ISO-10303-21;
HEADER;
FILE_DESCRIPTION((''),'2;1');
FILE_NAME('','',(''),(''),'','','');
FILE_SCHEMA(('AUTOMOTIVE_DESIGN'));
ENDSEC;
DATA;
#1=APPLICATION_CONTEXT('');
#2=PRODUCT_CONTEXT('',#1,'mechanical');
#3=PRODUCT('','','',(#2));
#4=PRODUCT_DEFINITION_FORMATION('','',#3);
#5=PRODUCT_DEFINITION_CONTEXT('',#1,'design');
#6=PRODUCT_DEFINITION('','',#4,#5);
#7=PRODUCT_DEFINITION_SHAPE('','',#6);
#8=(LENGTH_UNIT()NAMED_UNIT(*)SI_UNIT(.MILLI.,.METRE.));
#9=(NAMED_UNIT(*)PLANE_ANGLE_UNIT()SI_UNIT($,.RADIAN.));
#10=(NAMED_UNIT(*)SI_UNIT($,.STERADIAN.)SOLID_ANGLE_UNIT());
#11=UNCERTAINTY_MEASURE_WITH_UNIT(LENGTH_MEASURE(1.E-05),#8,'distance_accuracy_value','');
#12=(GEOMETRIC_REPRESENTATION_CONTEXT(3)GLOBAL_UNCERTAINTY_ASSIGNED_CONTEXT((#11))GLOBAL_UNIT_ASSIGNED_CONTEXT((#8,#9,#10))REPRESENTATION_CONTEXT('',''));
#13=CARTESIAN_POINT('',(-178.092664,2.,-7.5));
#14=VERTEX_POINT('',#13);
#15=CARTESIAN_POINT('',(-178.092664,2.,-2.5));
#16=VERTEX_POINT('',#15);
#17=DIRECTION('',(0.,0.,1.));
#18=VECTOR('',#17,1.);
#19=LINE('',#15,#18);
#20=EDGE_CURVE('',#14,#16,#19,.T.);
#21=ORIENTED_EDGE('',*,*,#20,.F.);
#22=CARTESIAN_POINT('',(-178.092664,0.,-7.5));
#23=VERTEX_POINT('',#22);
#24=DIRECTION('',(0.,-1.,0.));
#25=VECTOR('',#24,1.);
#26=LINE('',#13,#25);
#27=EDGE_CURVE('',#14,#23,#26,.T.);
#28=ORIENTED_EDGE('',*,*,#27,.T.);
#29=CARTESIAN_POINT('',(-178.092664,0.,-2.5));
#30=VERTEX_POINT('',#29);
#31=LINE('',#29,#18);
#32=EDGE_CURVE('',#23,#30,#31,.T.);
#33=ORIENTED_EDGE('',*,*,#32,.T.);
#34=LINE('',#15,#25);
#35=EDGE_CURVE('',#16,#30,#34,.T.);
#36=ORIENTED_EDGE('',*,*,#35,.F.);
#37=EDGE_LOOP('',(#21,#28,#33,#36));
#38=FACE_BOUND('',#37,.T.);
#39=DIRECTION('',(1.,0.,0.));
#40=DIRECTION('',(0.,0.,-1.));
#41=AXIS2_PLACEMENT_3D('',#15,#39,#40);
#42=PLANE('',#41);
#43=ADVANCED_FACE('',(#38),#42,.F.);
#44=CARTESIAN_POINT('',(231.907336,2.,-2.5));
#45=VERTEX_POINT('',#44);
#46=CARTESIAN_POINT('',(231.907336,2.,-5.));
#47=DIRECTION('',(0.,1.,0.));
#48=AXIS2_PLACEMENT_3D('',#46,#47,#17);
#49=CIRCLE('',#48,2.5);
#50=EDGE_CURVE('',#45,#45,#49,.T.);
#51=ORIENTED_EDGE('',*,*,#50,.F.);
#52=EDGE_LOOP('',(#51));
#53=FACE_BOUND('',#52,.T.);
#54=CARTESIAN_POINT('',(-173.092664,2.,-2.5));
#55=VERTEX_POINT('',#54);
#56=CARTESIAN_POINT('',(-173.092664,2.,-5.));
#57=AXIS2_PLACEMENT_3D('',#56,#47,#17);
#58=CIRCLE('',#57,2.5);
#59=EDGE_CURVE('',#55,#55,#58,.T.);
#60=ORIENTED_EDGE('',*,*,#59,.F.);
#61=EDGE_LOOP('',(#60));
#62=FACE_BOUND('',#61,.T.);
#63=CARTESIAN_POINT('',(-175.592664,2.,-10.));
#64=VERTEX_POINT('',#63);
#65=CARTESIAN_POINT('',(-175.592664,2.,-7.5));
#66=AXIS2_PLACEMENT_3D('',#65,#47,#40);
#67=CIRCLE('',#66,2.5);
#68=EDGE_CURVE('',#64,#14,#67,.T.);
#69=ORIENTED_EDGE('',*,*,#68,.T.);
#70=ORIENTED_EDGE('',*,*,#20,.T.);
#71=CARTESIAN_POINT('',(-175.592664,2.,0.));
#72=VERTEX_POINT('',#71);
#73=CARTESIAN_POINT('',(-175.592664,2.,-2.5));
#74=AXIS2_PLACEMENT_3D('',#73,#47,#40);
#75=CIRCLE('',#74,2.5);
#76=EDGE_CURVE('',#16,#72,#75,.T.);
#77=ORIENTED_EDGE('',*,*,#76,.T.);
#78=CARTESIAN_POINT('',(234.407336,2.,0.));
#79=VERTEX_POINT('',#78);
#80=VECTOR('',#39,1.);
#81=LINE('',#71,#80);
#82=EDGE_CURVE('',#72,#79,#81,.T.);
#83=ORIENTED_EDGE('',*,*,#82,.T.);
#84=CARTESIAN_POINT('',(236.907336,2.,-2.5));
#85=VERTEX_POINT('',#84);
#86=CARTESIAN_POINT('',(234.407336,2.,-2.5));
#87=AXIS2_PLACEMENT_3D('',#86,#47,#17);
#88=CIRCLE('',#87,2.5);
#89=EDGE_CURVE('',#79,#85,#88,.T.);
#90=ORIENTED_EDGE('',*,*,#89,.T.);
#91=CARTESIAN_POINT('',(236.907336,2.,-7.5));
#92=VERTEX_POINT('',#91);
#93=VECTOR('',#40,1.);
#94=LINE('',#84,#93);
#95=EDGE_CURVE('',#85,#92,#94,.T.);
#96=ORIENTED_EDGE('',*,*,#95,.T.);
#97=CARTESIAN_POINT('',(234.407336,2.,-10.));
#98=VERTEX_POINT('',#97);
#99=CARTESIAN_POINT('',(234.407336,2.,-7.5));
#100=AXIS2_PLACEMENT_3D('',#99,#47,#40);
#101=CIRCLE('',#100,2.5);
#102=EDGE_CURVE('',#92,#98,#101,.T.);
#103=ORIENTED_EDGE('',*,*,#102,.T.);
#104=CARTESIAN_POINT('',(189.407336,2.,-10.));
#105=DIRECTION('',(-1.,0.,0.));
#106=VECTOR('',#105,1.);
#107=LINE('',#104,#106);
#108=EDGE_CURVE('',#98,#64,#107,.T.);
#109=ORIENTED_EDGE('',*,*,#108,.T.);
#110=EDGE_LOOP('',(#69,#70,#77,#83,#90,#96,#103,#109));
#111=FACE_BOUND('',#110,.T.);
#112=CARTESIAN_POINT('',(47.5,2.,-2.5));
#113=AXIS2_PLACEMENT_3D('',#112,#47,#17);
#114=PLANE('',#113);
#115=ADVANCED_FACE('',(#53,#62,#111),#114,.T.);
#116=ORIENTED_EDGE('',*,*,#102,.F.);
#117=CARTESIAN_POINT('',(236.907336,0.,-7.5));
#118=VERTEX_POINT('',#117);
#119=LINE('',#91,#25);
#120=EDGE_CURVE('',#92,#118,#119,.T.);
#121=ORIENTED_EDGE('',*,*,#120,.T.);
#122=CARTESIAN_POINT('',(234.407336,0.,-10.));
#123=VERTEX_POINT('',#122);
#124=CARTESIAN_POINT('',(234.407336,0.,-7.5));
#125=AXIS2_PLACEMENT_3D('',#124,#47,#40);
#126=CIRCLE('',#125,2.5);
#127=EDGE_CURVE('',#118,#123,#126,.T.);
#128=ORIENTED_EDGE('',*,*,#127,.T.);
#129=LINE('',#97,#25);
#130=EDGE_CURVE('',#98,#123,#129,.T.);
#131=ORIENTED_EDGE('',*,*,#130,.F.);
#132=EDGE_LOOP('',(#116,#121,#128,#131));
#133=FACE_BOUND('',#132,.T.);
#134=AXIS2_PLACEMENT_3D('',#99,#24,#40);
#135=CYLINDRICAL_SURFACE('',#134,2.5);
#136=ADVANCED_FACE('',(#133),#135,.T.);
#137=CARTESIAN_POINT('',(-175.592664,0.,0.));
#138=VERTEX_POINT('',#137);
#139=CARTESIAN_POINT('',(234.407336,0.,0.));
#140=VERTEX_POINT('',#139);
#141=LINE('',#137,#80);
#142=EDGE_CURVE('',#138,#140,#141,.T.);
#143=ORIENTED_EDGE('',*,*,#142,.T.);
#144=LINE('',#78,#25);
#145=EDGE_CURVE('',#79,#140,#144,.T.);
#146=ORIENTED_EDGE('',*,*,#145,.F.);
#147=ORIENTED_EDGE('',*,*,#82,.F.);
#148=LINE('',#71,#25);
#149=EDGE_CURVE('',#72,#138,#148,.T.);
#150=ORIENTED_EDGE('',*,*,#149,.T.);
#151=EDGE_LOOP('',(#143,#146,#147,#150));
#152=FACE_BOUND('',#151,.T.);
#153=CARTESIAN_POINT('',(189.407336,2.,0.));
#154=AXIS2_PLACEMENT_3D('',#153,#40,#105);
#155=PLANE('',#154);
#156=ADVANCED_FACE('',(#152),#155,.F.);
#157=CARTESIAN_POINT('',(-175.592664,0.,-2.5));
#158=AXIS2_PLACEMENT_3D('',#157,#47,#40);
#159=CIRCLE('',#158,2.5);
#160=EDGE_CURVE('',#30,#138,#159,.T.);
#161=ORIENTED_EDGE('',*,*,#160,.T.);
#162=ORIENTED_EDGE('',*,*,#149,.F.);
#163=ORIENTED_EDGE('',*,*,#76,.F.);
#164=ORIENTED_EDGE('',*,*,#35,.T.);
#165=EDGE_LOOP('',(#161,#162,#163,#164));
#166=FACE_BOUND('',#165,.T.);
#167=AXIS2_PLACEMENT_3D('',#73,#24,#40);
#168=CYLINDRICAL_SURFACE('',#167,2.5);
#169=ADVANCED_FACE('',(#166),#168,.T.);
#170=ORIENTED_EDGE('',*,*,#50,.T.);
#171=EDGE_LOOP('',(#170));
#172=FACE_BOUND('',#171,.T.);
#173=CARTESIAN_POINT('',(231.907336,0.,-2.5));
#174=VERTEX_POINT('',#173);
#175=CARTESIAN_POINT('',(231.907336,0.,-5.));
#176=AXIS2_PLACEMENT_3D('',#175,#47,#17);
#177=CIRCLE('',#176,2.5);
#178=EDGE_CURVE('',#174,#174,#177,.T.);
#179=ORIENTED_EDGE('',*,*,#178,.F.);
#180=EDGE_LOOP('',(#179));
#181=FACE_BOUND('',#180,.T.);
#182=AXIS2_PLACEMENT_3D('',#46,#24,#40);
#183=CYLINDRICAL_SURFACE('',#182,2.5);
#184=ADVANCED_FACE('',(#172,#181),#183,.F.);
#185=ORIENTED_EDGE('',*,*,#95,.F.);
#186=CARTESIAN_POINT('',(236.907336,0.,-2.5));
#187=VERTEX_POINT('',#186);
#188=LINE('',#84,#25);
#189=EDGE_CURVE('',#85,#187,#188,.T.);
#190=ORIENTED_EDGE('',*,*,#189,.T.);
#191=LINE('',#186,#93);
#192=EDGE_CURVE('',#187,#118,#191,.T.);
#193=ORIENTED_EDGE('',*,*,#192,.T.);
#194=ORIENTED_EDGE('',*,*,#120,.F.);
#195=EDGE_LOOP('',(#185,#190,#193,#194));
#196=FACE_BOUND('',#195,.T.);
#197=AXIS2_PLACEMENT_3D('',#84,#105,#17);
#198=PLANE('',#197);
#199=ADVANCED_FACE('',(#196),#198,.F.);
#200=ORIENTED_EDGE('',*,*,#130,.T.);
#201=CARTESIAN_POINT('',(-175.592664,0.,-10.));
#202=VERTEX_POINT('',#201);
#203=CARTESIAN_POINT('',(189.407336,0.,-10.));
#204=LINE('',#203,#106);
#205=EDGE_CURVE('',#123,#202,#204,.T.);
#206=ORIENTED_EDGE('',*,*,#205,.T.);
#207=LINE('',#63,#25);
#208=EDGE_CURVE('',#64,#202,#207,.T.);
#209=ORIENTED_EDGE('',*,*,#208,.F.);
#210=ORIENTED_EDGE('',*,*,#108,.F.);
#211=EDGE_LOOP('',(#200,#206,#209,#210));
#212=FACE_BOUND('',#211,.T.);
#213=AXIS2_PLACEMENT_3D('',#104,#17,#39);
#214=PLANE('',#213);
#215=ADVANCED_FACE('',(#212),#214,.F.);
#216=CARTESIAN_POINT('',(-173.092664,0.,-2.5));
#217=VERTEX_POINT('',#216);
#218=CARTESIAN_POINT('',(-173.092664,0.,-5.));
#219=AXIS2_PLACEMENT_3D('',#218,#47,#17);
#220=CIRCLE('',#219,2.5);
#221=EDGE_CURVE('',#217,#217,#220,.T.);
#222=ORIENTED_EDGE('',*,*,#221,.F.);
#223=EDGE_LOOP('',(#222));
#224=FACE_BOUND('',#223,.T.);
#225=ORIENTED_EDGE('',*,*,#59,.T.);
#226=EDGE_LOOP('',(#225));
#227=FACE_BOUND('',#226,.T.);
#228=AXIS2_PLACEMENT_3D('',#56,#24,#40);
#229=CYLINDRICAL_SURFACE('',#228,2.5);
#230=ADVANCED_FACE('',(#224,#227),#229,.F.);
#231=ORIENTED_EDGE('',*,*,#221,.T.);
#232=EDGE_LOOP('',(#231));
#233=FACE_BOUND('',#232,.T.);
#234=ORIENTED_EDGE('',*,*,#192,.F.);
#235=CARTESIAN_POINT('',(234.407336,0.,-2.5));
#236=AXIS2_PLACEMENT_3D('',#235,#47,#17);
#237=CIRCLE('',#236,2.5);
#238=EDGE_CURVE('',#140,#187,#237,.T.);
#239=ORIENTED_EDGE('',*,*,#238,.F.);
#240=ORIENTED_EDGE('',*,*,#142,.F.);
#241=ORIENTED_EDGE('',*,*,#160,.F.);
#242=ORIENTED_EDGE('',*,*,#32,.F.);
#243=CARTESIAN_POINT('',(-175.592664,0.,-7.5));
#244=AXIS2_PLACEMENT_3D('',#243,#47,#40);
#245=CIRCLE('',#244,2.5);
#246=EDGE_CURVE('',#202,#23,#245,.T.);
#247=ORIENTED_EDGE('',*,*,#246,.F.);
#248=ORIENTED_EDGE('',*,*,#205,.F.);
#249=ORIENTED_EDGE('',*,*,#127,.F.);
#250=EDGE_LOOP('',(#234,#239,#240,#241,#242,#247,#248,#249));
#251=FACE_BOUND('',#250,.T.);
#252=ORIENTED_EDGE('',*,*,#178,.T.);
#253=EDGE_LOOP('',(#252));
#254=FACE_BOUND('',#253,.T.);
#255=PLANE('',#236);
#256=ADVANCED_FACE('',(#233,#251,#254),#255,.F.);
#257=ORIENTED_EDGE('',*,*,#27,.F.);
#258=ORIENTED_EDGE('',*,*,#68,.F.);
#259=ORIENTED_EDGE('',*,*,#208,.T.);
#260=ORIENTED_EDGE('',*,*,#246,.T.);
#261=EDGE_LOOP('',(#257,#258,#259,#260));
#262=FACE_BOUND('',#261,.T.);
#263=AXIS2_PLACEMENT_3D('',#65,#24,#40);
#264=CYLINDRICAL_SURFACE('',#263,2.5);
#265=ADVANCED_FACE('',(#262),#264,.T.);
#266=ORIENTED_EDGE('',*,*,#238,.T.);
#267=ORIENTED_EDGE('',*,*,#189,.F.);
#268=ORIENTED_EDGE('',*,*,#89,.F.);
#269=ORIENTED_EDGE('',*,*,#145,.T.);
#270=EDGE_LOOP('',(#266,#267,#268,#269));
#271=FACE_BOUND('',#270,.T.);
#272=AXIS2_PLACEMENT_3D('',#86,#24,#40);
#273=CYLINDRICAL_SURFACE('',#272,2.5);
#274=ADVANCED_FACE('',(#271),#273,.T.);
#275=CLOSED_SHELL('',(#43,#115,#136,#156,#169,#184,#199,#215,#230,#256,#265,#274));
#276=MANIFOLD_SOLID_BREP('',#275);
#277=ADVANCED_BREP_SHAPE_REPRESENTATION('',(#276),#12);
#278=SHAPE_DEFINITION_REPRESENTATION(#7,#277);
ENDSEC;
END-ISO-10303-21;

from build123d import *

# Parameters (mm, degrees)
SKETCH1_R           = 2.5
BOSS_EXTRUDE2_DEPTH = 2
FLEX1_OUTLINE_R     = 2.5
FLEX1_DEPTH         = 2


# Read off the part's stored shape, not the designer's step: Flex1
with BuildPart() as part:
    # Sketch1 → Boss-Extrude2 (new body)
    with BuildSketch(Plane(origin=(0, 0, 0), x_dir=(1, 0, 0), z_dir=(0, 1, 0))):
        with BuildLine():
            Line((2.5, 0), (47.5, 0))
            ThreePointArc((47.5, 0), (49.267766953, 0.732233047), (50, 2.5))
            Line((50, 2.5), (50, 7.5))
            ThreePointArc((50, 7.5), (49.267766953, 9.267766953), (47.5, 10))
            Line((47.5, 10), (2.5, 10))
            ThreePointArc((2.5, 10), (0.732233047, 9.267766953), (0, 7.5))
            Line((0, 7.5), (0, 2.5))
            ThreePointArc((0, 2.5), (0.732233047, 0.732233047), (2.5, 0))
        make_face()
        with Locations(Location((5, 5, 0), (0, 0, 270))):
            Circle(SKETCH1_R, mode=Mode.SUBTRACT)
        with Locations(Location((45, 5, 0), (0, 0, 270))):
            Circle(SKETCH1_R, mode=Mode.SUBTRACT)
    extrude(amount=BOSS_EXTRUDE2_DEPTH)

    # Flex1 outline → Flex1 (add)
    # profile 1 of 4: a face of its own
    with BuildSketch(Plane(origin=(0, 0, 0), x_dir=(1, 0, 0), z_dir=(0, 1, 0))):
        with BuildLine():
            Line((2.5, 10), (-175.592663933, 10))
            ThreePointArc((-175.592663933, 10), (-177.360430886, 9.267766953), (-178.092663933, 7.5))
            Line((-178.092663933, 7.5), (-178.092663933, 2.5))
            ThreePointArc((-178.092663933, 2.5), (-177.360430886, 0.732233047), (-175.592663933, 0))
            Line((-175.592663933, 0), (2.5, 0))
            ThreePointArc((2.5, 0), (0.732233047, 0.732233047), (0, 2.5))
            Line((0, 2.5), (0, 7.5))
            ThreePointArc((0, 7.5), (0.732233047, 9.267766953), (2.5, 10))
        make_face()
        with Locations((-173.092663933, 5)):
            Circle(FLEX1_OUTLINE_R, mode=Mode.SUBTRACT)
    # profile 2 of 4: a face of its own
    with BuildSketch(Plane(origin=(0, 0, 0), x_dir=(1, 0, 0), z_dir=(0, 1, 0))):
        with BuildLine():
            Line((234.407336067, 10), (47.5, 10))
            ThreePointArc((47.5, 10), (49.267766953, 9.267766953), (50, 7.5))
            Line((50, 7.5), (50, 2.5))
            ThreePointArc((50, 2.5), (49.267766953, 0.732233047), (47.5, 0))
            Line((47.5, 0), (234.407336067, 0))
            ThreePointArc((234.407336067, 0), (236.17510302, 0.732233047), (236.907336067, 2.5))
            Line((236.907336067, 2.5), (236.907336067, 7.5))
            ThreePointArc((236.907336067, 7.5), (236.17510302, 9.267766953), (234.407336067, 10))
        make_face()
        with Locations((231.907336067, 5)):
            Circle(FLEX1_OUTLINE_R, mode=Mode.SUBTRACT)
    # profile 3 of 4: a face of its own
    with BuildSketch(Plane(origin=(0, 0, 0), x_dir=(1, 0, 0), z_dir=(0, 1, 0))):
        with Locations((5, 5)):
            Circle(FLEX1_OUTLINE_R)
    # profile 4 of 4: a face of its own
    with BuildSketch(Plane(origin=(0, 0, 0), x_dir=(1, 0, 0), z_dir=(0, 1, 0))):
        with Locations((45, 5)):
            Circle(FLEX1_OUTLINE_R)
    extrude(amount=FLEX1_DEPTH)


solid = part.part
